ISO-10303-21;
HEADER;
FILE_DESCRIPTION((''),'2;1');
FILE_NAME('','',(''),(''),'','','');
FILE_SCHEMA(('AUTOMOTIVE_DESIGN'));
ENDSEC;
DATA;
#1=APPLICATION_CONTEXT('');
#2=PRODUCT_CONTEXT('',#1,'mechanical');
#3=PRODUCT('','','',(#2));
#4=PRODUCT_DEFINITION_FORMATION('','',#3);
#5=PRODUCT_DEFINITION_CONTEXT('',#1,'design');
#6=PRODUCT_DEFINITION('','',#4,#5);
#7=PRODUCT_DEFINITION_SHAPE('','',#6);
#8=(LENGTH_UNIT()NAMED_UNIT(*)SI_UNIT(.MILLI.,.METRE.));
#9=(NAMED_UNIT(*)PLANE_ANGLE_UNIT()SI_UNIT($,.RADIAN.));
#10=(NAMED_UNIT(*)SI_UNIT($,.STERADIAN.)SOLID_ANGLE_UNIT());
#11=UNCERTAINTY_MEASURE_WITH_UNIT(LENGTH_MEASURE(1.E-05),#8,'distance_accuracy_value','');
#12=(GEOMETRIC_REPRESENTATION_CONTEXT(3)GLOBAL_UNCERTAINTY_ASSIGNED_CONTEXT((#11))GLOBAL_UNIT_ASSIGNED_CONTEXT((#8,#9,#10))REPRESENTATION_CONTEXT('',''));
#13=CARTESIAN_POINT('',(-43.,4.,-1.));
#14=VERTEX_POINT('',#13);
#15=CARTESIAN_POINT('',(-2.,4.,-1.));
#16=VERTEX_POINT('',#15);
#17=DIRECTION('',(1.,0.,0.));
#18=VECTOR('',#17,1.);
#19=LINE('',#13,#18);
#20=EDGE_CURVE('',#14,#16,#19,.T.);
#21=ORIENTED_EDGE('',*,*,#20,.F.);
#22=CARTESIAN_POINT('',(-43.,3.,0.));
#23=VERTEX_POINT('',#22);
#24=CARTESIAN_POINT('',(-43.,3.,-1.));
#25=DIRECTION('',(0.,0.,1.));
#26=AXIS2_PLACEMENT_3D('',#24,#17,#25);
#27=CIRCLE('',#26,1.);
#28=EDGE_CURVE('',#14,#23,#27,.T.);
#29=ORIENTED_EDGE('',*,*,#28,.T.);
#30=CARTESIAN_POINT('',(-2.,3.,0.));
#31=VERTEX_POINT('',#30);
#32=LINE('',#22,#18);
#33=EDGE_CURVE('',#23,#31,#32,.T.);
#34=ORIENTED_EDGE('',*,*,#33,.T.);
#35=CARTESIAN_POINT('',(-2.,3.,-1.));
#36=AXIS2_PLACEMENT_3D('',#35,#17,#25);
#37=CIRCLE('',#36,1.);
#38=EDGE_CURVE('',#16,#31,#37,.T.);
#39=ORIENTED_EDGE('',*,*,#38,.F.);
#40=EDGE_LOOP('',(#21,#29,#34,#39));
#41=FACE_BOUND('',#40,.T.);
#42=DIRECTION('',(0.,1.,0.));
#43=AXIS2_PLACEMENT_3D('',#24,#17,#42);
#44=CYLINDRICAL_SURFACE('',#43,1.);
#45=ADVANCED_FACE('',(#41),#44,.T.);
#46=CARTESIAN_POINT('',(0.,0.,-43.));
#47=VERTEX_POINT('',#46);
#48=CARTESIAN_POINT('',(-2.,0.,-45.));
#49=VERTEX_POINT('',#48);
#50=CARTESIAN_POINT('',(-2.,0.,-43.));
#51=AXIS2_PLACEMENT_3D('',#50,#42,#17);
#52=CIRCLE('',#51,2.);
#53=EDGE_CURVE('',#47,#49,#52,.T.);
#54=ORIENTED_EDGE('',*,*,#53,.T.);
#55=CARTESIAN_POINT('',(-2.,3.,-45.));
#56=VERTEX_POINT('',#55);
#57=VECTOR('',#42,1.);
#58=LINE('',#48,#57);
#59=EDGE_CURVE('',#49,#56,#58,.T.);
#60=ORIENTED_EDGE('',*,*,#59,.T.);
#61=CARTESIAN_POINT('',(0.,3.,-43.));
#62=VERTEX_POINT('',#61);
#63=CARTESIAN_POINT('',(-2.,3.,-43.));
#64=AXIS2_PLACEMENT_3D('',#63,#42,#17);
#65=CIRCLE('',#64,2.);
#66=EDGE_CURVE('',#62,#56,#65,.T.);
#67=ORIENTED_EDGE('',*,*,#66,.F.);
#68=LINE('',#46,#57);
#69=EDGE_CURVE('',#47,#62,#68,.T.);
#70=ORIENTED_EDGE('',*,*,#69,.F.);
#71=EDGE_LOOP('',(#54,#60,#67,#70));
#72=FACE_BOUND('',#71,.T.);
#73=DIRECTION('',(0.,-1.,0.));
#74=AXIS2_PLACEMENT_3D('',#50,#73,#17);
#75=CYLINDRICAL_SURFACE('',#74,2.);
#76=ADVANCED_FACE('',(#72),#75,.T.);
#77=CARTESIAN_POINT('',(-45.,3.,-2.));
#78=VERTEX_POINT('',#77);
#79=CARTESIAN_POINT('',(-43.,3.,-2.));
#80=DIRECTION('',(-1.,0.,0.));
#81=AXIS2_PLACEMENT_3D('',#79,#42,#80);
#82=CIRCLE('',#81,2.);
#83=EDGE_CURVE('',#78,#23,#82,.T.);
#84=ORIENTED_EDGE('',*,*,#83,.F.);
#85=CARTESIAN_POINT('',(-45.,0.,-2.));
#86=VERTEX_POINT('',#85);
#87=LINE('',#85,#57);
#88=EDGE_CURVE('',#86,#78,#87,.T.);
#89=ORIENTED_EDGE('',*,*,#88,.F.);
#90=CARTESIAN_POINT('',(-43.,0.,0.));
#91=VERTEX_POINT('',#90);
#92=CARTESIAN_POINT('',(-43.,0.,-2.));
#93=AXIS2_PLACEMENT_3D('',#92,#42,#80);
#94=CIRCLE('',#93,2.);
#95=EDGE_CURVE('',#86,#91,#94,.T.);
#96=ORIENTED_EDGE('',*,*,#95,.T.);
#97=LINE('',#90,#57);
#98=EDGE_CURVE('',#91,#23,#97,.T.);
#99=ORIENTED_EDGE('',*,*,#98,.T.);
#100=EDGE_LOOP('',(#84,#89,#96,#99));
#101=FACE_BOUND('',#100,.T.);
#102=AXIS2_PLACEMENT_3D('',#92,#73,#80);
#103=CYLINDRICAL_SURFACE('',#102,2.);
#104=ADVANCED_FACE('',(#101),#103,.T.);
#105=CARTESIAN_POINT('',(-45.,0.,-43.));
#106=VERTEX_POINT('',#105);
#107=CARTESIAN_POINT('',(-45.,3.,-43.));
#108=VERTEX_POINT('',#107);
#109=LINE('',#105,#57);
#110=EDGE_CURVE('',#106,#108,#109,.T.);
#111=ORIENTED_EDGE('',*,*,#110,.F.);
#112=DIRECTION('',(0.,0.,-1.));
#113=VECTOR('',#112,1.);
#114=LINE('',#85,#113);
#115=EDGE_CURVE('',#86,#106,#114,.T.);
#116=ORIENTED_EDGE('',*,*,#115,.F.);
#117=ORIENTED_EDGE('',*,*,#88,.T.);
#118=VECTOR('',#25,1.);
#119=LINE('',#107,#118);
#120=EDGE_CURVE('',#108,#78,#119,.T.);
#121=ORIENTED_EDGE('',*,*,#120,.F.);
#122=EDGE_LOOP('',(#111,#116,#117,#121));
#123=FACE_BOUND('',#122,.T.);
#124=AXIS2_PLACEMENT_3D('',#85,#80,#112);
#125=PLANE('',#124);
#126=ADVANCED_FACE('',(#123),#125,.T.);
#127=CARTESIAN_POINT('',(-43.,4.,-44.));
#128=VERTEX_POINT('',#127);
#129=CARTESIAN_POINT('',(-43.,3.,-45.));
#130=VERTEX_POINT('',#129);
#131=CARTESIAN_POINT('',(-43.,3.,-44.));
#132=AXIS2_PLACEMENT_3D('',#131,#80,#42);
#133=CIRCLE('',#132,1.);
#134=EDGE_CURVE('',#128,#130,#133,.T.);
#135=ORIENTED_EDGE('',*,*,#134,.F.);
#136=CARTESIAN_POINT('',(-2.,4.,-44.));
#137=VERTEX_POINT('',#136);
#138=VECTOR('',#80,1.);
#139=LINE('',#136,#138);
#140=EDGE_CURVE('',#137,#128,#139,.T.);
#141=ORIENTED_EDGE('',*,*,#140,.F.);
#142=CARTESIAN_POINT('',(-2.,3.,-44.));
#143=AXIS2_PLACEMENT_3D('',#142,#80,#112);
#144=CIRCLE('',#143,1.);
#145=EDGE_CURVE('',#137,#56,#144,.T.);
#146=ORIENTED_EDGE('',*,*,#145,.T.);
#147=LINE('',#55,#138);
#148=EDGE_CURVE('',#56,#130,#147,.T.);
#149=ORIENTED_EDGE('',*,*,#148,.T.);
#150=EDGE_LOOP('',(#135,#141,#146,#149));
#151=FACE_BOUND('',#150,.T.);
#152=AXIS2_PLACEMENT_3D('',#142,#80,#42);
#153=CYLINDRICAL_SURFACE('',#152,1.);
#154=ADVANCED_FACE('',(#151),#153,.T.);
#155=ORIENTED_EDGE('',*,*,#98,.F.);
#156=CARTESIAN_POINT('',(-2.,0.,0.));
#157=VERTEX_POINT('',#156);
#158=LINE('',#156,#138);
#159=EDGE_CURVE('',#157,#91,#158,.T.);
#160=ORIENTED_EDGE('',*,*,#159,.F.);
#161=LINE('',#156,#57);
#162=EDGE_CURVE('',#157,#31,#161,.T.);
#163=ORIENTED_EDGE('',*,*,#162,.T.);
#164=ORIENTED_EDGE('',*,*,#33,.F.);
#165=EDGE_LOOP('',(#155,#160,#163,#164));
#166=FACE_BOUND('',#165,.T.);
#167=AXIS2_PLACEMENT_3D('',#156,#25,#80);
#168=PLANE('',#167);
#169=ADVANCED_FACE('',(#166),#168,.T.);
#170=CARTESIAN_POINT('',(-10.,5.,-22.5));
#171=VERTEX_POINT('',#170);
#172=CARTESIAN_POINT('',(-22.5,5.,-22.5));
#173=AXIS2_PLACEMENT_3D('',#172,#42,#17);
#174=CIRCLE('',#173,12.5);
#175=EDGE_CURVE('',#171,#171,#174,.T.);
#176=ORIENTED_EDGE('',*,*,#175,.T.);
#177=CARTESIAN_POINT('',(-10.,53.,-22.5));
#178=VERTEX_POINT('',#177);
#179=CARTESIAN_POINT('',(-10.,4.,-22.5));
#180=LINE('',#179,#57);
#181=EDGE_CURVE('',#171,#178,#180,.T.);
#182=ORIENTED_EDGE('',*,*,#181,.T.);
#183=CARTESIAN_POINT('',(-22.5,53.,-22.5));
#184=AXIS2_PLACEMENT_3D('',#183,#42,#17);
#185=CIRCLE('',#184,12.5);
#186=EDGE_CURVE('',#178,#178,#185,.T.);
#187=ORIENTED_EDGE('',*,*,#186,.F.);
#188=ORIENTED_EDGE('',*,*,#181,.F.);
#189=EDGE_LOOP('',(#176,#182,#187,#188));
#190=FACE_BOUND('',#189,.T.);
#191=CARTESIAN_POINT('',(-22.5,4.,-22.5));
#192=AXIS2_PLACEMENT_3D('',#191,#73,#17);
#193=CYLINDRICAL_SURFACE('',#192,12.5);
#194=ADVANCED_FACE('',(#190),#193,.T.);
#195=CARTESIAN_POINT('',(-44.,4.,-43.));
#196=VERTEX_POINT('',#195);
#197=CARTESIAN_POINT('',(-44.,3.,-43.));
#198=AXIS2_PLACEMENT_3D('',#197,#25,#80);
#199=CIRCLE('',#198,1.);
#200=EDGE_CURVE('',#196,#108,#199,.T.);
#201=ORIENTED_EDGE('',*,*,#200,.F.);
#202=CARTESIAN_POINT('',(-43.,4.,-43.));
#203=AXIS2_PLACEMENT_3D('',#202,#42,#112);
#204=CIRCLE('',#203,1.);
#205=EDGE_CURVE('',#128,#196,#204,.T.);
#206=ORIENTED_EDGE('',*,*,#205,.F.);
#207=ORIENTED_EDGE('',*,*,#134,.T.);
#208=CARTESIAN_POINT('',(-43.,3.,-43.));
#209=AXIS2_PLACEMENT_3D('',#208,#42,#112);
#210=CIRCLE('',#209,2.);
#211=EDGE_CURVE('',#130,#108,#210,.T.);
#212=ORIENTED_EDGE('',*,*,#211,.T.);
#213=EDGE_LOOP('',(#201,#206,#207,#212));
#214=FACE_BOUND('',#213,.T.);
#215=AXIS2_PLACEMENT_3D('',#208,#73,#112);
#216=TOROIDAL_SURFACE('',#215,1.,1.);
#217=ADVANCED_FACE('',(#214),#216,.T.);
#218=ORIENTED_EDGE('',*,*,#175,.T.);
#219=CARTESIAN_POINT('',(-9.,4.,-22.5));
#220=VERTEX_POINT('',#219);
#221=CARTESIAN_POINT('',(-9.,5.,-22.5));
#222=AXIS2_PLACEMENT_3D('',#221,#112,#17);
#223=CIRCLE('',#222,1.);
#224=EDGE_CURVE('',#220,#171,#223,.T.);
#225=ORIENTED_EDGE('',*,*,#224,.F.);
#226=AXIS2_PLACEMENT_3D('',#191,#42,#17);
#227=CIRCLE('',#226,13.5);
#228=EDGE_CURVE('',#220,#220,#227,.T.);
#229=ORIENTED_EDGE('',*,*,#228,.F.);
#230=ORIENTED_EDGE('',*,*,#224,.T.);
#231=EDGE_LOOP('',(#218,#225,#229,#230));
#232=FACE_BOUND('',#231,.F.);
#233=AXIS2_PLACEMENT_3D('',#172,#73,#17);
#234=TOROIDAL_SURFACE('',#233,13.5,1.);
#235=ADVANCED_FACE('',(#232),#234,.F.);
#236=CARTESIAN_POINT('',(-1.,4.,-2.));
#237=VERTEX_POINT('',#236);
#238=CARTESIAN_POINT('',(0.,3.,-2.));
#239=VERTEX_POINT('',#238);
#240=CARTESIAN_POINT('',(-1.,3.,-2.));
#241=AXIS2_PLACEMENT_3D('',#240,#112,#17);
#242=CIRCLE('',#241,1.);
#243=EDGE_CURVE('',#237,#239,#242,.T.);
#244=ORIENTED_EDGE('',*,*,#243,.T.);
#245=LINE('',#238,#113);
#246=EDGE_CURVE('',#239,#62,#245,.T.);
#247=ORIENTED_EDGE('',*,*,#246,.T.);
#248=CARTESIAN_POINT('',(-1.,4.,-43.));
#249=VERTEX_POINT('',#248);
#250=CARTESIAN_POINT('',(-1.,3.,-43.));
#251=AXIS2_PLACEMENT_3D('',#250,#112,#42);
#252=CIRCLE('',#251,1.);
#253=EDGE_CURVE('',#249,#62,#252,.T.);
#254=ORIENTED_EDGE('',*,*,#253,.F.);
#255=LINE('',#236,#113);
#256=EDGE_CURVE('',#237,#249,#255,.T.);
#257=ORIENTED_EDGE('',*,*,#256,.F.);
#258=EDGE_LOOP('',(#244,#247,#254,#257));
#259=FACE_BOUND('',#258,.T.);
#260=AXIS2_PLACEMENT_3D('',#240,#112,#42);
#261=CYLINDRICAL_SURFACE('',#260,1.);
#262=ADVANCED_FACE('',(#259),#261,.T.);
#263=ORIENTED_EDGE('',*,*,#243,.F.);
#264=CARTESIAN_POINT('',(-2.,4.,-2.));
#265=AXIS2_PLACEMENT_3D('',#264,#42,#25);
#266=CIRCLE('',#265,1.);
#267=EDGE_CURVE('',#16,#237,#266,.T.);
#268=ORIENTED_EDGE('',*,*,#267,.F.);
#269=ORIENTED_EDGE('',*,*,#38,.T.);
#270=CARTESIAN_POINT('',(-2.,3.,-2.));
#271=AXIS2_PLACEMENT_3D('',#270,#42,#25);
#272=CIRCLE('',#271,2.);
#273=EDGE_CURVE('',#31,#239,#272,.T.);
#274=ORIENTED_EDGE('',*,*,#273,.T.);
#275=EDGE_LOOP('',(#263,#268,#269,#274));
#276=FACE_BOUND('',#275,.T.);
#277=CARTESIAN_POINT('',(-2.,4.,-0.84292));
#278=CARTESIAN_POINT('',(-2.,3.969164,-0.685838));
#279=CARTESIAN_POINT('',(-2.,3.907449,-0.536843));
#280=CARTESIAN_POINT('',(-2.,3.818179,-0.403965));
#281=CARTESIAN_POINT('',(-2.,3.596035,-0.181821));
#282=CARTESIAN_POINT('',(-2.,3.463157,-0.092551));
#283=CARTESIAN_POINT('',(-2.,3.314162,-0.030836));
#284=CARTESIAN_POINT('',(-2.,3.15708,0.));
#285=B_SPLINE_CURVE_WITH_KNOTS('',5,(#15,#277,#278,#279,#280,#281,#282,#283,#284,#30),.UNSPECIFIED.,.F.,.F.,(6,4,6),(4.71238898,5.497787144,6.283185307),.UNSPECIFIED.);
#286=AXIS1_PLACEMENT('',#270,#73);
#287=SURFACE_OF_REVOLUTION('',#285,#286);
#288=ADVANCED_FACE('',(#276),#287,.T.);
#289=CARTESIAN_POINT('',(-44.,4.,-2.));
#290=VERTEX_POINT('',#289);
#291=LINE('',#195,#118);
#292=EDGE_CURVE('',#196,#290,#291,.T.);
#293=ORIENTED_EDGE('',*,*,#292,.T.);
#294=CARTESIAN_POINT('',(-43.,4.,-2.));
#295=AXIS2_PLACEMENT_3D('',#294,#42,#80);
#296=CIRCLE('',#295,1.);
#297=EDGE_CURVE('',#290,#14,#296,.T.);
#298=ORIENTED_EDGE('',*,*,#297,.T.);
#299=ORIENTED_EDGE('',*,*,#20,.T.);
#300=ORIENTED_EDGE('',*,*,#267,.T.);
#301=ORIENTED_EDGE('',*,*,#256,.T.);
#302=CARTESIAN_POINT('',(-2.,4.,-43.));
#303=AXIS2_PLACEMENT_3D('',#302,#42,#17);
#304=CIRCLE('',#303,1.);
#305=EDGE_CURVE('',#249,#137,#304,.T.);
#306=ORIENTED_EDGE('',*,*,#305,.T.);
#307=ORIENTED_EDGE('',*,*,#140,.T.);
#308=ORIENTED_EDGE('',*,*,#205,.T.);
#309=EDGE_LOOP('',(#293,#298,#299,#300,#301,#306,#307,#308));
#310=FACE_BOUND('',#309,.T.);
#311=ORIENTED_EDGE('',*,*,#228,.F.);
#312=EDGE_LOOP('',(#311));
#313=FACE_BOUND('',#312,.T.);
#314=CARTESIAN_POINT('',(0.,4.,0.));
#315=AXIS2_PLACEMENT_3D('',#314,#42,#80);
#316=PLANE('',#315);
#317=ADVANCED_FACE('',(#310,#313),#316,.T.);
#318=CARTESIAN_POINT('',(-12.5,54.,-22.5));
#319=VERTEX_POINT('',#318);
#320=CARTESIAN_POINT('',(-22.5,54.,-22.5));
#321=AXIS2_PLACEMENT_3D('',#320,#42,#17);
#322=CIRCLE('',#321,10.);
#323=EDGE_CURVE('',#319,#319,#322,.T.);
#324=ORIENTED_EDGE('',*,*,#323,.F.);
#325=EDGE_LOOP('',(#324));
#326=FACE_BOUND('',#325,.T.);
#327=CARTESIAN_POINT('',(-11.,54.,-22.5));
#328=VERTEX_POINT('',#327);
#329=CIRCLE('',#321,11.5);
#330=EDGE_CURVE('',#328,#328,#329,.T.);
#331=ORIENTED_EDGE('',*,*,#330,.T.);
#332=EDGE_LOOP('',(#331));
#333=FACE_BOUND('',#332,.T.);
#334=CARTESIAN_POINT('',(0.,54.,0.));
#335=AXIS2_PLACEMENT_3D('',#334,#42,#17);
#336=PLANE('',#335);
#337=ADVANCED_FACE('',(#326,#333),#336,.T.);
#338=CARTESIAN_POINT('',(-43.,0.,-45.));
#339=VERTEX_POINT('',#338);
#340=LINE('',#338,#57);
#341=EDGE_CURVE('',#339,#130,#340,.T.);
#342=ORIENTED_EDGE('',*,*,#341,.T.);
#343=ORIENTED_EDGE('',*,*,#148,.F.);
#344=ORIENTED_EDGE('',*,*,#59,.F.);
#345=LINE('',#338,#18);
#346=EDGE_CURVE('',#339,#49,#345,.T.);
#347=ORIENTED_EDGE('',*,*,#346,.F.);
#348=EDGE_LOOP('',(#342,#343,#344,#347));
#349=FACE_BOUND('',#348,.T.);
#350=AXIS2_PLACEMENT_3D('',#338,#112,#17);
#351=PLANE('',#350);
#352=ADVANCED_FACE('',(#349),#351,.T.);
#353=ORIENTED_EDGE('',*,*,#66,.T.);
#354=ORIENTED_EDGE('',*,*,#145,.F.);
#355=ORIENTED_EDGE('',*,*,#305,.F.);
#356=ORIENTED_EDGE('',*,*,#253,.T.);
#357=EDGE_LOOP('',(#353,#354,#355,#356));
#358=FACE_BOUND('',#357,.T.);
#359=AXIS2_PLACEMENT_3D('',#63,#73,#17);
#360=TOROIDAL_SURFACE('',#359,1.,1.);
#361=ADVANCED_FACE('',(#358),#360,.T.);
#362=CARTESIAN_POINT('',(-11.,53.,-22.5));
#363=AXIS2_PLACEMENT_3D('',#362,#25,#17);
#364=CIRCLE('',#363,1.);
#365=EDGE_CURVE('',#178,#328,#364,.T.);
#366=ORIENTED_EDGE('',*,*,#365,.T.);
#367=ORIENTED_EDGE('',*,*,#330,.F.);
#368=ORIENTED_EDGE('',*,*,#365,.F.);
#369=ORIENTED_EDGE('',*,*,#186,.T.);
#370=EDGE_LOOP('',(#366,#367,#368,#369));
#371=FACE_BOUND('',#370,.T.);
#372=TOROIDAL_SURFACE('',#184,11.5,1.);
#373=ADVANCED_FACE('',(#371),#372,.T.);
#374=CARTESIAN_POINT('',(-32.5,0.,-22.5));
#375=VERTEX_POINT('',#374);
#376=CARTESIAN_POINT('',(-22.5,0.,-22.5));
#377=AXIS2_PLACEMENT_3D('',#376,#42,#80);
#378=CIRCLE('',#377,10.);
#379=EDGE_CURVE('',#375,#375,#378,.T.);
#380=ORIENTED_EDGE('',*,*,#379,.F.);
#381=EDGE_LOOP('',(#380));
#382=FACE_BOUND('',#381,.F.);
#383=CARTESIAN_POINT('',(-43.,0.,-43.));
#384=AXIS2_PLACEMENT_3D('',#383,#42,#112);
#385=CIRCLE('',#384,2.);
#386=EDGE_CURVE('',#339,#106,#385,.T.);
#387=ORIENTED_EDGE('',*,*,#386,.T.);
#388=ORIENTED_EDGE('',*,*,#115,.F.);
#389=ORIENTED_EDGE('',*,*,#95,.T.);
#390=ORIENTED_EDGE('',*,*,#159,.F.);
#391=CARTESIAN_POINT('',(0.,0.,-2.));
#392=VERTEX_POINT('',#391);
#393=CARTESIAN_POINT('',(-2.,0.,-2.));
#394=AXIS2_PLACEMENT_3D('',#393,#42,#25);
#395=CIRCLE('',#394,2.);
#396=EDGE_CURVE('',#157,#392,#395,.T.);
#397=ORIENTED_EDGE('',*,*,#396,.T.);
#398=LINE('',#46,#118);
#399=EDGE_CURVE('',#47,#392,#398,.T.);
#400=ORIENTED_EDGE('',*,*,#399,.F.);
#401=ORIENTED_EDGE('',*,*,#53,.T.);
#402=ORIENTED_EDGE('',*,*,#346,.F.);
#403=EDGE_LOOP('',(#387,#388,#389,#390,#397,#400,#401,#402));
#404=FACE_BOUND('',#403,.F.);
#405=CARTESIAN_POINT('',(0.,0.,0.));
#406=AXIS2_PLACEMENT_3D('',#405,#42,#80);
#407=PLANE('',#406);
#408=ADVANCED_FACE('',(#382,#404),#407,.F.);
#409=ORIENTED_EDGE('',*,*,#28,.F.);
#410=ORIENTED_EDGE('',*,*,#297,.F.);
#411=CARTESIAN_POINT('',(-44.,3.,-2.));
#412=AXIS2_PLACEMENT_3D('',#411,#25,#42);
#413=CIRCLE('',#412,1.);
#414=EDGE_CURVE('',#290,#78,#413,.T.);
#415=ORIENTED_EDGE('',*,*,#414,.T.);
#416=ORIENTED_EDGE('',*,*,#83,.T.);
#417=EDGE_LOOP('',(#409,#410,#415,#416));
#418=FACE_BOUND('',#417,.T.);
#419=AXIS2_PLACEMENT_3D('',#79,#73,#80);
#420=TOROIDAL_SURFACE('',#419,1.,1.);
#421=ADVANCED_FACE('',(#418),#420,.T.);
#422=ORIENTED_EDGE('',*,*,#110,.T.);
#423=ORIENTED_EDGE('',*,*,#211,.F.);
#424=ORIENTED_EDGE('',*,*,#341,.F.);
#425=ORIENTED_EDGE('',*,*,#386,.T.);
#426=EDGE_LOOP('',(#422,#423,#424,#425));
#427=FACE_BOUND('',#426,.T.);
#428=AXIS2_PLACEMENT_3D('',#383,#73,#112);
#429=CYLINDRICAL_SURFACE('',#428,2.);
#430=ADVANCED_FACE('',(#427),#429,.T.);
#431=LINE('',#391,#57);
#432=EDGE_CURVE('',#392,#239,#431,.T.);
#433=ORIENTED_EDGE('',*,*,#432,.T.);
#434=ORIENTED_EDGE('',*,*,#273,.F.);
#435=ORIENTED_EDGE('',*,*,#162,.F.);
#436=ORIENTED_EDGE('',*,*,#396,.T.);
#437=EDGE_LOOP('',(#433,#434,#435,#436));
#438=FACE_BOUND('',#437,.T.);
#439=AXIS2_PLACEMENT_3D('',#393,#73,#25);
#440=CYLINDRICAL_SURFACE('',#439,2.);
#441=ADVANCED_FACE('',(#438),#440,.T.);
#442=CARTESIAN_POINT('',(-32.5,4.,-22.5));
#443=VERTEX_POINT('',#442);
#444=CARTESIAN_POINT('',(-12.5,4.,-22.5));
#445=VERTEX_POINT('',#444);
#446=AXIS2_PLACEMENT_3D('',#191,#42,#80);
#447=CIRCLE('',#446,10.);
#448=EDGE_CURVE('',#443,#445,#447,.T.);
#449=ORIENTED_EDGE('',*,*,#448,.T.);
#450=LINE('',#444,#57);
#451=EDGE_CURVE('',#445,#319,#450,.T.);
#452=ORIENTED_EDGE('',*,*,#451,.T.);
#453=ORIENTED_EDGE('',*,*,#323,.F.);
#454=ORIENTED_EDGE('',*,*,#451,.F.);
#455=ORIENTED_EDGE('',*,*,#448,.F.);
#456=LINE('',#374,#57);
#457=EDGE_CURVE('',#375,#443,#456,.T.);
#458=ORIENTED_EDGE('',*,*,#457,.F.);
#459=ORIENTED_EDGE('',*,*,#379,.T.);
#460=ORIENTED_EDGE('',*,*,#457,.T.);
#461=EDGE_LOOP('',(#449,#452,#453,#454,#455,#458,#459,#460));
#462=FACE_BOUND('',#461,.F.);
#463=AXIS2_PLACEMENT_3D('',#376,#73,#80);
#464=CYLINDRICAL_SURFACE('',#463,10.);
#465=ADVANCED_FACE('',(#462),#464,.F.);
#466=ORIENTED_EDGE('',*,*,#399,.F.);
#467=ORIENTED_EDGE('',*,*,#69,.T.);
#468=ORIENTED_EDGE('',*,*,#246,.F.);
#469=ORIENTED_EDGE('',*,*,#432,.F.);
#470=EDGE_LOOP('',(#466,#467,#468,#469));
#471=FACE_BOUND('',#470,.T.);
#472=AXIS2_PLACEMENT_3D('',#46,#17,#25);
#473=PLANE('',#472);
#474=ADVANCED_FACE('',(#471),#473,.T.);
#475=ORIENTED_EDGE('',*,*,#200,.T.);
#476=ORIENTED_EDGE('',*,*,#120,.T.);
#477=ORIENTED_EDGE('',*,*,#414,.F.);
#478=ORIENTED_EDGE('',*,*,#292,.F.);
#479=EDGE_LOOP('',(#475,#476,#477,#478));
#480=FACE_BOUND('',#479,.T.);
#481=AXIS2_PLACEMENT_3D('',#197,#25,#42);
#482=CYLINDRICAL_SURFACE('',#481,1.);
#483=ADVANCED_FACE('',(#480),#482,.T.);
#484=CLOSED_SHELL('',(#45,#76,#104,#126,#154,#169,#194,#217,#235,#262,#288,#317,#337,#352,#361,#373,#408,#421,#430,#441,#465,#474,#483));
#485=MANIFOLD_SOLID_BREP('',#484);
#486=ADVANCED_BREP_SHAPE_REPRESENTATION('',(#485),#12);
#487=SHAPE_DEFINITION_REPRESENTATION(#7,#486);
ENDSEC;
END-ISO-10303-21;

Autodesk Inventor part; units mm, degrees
ref_plane "YZ Plane" through (0, 0, 0) normal (1, 0, 0) x (0, 1, 0)
ref_plane "XZ Plane" through (0, 0, 0) normal (0, 1, 0) x (-1, 0, 0)
ref_plane "XY Plane" through (0, 0, 0) normal (0, 0, 1) x (1, 0, 0)
sketch "底面" plane through (0, 0, 0) normal (0, 1, 0) x (-1, 0, 0)
  line L0 (2, 0) -> (43, 0)
  line L1 (45, -2) -> (45, -43)
  line L2 (43, -45) -> (2, -45)
  line L3 (0, -43) -> (0, -2)
  arc A0 (45, -2) -> (43, 0) centre (43, -2) ccw
  arc A1 (43, -45) -> (45, -43) centre (43, -43) ccw
  arc A2 (0, -43) -> (2, -45) centre (2, -43) ccw
  arc A3 (2, 0) -> (0, -2) centre (2, -2) ccw
  circle A4 centre (22.5, -22.5) radius 10
  point P0 (0, 0)
  point P1 (45, -45)
  point P2 (45, 0)
  point P3 (0, -45)
  point P4 (45, -22.5)
  point P5 (22.5, 0)
  dimension "d0" = 45
  dimension "d1" = 45
  dimension "d2" = 2
  dimension "d8" = 20
extrude "底" add sketch "底面" along normal blind 4
sketch "スケッチ2" plane through (0, 4, 0) normal (0, 1, 0) x (1, 0, 0)
  circle A0 centre (-22.5, 22.5) radius 12.5
  line L0 (-43, 0) -> (-2, 0) projected
  line L1 (-45, 43) -> (-45, 2) projected
  circle A1 centre (-22.5, 22.5) radius 10 projected
  point P0 (0, 0)
  point P1 (-22.5, 0)
  point P2 (-45, 22.5)
  dimension "d5" = 25
extrude "棒" add sketch "スケッチ2" along normal blind 50
fillet "フィレット1" radius 1 2 edges at (-35, 4, -22.5) (-35, 54, -22.5)
fillet "フィレット2" radius 1 8 edges at (-0.5858, 4, -0.5858) (0, 4, -22.5) (-0.5858, 4, -44.4142) (-22.5, 4, -45) (-44.4142, 4, -44.4142) (-45, 4, -22.5) (-44.4142, 4, -0.5858) (-22.5, 4, 0)
equation "\"d0\" = d1"
properties part number "pole-2_3D プリント"
